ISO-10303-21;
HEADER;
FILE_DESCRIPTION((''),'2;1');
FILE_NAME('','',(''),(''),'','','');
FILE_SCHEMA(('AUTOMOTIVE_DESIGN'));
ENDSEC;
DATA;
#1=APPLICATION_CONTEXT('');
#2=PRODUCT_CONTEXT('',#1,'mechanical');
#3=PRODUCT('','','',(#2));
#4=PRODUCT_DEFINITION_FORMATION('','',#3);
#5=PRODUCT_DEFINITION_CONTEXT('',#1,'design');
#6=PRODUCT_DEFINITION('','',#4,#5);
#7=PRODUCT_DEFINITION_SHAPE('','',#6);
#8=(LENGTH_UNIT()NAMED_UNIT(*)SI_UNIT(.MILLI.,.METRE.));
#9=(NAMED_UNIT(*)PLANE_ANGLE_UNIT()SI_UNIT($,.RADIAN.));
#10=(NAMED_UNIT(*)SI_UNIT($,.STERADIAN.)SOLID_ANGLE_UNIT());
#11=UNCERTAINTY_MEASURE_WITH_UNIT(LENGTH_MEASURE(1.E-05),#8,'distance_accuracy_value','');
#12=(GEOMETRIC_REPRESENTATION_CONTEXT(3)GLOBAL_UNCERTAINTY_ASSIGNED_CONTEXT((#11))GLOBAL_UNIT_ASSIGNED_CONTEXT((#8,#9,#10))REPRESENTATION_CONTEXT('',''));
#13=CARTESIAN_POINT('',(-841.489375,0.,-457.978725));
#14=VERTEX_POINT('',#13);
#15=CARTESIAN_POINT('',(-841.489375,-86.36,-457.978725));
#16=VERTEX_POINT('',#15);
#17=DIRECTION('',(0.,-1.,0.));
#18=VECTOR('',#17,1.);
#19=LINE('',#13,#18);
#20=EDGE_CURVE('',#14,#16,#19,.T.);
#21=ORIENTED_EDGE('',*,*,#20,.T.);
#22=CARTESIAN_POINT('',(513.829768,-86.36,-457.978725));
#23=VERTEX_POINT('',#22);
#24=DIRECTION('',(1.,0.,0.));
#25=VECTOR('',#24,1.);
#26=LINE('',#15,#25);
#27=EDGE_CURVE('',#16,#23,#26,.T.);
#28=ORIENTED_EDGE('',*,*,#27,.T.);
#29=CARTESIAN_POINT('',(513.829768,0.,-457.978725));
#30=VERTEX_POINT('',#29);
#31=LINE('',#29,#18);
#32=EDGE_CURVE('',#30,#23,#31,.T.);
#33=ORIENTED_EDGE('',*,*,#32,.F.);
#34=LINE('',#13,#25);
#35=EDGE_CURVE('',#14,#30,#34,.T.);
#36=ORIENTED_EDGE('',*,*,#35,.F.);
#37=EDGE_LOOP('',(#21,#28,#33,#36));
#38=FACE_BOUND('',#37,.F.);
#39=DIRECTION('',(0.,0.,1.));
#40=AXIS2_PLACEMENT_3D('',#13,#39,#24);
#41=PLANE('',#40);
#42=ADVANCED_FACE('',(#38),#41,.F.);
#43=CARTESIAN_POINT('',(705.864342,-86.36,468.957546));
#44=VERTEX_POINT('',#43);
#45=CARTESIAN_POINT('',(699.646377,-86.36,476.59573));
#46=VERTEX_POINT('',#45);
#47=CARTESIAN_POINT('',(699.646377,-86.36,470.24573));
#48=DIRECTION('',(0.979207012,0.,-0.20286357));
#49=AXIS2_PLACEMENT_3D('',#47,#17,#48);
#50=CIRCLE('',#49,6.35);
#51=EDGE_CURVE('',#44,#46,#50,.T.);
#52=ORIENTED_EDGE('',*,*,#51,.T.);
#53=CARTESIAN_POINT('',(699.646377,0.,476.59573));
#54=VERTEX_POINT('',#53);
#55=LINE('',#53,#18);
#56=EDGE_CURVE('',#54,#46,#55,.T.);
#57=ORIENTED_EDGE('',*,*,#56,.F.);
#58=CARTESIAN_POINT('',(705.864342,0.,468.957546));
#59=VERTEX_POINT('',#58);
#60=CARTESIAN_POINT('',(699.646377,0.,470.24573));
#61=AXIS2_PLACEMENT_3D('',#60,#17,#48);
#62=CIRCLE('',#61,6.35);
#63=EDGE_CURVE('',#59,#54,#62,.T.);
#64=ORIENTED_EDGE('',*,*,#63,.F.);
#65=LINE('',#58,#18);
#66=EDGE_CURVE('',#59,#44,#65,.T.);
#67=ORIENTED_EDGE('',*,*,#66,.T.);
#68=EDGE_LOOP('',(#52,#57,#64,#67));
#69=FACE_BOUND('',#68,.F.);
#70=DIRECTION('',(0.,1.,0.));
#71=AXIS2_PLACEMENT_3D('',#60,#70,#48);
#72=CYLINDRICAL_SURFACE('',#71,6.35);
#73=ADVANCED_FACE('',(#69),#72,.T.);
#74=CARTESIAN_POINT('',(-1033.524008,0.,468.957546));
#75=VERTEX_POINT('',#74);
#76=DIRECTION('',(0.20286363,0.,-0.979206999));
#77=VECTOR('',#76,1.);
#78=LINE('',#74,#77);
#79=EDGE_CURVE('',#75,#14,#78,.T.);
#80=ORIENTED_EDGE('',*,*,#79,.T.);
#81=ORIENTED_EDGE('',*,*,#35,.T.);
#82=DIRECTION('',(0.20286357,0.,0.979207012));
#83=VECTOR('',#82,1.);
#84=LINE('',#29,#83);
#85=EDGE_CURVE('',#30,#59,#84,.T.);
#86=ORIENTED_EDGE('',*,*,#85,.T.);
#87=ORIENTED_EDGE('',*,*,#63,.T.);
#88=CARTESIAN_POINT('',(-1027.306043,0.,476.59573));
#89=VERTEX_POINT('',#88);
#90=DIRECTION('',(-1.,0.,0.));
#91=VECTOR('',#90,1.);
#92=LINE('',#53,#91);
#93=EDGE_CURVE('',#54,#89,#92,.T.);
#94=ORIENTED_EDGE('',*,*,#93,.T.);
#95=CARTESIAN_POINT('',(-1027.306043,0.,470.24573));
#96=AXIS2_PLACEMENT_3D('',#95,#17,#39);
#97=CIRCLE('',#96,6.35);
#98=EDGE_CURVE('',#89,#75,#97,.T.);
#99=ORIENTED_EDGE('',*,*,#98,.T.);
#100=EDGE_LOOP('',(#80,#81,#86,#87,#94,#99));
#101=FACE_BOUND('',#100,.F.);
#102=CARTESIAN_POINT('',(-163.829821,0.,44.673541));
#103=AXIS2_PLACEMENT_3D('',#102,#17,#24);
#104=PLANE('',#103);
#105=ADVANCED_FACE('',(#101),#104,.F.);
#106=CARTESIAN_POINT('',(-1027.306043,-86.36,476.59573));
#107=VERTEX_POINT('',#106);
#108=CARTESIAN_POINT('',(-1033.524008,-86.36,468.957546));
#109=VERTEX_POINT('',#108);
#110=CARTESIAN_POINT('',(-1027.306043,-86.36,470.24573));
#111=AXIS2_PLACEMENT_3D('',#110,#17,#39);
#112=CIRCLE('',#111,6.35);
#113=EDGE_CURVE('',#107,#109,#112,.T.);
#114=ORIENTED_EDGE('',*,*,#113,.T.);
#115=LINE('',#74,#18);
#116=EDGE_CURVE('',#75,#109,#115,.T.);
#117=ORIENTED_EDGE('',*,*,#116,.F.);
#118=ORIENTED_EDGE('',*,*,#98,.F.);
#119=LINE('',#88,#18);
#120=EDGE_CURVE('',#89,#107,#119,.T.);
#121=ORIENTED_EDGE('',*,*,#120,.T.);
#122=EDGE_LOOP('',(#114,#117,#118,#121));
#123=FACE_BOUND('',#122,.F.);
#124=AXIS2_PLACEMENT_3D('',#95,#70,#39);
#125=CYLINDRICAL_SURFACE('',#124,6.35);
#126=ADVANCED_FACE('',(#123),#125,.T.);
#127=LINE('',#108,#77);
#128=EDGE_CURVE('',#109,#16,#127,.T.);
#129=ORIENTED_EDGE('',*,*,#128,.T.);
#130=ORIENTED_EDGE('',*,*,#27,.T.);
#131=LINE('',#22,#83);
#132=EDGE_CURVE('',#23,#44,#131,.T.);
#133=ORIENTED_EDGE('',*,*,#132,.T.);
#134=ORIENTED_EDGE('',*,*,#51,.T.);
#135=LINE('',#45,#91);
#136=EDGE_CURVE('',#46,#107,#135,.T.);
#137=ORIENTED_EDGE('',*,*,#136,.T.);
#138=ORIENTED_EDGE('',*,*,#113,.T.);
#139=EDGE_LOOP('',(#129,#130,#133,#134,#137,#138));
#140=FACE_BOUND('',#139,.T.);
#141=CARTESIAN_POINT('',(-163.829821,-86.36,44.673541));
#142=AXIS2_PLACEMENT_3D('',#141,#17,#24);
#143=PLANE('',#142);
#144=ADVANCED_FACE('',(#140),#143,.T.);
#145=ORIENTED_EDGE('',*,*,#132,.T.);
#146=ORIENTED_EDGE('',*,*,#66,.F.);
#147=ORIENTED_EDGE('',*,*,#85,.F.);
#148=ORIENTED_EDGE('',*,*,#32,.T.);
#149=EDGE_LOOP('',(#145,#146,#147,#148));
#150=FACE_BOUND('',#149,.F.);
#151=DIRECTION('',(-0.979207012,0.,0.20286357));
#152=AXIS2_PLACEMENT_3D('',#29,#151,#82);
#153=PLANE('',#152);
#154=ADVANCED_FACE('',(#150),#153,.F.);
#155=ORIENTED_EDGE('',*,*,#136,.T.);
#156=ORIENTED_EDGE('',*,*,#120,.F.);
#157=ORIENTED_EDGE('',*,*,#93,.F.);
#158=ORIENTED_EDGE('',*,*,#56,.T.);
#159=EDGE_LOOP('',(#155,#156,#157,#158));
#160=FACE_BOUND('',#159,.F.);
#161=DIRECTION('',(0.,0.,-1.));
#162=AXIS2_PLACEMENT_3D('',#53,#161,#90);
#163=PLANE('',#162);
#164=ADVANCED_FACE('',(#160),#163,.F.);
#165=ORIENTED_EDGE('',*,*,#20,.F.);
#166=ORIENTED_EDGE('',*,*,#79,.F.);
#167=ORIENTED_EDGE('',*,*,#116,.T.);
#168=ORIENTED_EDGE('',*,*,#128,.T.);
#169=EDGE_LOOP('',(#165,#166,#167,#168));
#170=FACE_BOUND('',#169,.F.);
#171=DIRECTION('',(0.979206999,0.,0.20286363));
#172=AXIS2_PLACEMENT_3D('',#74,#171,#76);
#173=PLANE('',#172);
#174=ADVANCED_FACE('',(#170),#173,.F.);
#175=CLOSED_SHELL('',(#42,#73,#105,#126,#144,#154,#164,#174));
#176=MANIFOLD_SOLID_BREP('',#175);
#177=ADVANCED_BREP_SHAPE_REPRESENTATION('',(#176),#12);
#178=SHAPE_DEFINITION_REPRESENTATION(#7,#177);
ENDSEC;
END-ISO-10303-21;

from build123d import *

# Parameters (mm, degrees)
F1_DEPTH = 86.36


# Not quite as in the source:
# - a feature of the source that left no trace in its solid (it failed there, or was rolled back) is left out


with BuildPart() as f1:
    # F0 (on Front) → F1 (new body)
    with BuildSketch(Plane.XZ):
        with BuildLine():
            Line((699.6463771647, 476.5957295895), (-1027.3060432158, 476.5957295895))
            ThreePointArc((-1027.3060432158, 476.5957295895), (-1032.2305974455, 474.2546278967), (-1033.5240076617, 468.9575455385))
            Line((-1033.5240076617, 468.9575455385), (-841.4893746376, -457.9787254334))
            Line((-841.4893746376, -457.9787254333), (513.829767704, -457.9787254333))
            Line((513.829767704, -457.9787254333), (705.8643416894, 468.9575459187))
            ThreePointArc((705.8643416894, 468.9575459187), (704.5709312719, 474.2546280473), (699.6463771647, 476.5957295895))
        make_face()
    extrude(amount=F1_DEPTH)


solid = f1.part
